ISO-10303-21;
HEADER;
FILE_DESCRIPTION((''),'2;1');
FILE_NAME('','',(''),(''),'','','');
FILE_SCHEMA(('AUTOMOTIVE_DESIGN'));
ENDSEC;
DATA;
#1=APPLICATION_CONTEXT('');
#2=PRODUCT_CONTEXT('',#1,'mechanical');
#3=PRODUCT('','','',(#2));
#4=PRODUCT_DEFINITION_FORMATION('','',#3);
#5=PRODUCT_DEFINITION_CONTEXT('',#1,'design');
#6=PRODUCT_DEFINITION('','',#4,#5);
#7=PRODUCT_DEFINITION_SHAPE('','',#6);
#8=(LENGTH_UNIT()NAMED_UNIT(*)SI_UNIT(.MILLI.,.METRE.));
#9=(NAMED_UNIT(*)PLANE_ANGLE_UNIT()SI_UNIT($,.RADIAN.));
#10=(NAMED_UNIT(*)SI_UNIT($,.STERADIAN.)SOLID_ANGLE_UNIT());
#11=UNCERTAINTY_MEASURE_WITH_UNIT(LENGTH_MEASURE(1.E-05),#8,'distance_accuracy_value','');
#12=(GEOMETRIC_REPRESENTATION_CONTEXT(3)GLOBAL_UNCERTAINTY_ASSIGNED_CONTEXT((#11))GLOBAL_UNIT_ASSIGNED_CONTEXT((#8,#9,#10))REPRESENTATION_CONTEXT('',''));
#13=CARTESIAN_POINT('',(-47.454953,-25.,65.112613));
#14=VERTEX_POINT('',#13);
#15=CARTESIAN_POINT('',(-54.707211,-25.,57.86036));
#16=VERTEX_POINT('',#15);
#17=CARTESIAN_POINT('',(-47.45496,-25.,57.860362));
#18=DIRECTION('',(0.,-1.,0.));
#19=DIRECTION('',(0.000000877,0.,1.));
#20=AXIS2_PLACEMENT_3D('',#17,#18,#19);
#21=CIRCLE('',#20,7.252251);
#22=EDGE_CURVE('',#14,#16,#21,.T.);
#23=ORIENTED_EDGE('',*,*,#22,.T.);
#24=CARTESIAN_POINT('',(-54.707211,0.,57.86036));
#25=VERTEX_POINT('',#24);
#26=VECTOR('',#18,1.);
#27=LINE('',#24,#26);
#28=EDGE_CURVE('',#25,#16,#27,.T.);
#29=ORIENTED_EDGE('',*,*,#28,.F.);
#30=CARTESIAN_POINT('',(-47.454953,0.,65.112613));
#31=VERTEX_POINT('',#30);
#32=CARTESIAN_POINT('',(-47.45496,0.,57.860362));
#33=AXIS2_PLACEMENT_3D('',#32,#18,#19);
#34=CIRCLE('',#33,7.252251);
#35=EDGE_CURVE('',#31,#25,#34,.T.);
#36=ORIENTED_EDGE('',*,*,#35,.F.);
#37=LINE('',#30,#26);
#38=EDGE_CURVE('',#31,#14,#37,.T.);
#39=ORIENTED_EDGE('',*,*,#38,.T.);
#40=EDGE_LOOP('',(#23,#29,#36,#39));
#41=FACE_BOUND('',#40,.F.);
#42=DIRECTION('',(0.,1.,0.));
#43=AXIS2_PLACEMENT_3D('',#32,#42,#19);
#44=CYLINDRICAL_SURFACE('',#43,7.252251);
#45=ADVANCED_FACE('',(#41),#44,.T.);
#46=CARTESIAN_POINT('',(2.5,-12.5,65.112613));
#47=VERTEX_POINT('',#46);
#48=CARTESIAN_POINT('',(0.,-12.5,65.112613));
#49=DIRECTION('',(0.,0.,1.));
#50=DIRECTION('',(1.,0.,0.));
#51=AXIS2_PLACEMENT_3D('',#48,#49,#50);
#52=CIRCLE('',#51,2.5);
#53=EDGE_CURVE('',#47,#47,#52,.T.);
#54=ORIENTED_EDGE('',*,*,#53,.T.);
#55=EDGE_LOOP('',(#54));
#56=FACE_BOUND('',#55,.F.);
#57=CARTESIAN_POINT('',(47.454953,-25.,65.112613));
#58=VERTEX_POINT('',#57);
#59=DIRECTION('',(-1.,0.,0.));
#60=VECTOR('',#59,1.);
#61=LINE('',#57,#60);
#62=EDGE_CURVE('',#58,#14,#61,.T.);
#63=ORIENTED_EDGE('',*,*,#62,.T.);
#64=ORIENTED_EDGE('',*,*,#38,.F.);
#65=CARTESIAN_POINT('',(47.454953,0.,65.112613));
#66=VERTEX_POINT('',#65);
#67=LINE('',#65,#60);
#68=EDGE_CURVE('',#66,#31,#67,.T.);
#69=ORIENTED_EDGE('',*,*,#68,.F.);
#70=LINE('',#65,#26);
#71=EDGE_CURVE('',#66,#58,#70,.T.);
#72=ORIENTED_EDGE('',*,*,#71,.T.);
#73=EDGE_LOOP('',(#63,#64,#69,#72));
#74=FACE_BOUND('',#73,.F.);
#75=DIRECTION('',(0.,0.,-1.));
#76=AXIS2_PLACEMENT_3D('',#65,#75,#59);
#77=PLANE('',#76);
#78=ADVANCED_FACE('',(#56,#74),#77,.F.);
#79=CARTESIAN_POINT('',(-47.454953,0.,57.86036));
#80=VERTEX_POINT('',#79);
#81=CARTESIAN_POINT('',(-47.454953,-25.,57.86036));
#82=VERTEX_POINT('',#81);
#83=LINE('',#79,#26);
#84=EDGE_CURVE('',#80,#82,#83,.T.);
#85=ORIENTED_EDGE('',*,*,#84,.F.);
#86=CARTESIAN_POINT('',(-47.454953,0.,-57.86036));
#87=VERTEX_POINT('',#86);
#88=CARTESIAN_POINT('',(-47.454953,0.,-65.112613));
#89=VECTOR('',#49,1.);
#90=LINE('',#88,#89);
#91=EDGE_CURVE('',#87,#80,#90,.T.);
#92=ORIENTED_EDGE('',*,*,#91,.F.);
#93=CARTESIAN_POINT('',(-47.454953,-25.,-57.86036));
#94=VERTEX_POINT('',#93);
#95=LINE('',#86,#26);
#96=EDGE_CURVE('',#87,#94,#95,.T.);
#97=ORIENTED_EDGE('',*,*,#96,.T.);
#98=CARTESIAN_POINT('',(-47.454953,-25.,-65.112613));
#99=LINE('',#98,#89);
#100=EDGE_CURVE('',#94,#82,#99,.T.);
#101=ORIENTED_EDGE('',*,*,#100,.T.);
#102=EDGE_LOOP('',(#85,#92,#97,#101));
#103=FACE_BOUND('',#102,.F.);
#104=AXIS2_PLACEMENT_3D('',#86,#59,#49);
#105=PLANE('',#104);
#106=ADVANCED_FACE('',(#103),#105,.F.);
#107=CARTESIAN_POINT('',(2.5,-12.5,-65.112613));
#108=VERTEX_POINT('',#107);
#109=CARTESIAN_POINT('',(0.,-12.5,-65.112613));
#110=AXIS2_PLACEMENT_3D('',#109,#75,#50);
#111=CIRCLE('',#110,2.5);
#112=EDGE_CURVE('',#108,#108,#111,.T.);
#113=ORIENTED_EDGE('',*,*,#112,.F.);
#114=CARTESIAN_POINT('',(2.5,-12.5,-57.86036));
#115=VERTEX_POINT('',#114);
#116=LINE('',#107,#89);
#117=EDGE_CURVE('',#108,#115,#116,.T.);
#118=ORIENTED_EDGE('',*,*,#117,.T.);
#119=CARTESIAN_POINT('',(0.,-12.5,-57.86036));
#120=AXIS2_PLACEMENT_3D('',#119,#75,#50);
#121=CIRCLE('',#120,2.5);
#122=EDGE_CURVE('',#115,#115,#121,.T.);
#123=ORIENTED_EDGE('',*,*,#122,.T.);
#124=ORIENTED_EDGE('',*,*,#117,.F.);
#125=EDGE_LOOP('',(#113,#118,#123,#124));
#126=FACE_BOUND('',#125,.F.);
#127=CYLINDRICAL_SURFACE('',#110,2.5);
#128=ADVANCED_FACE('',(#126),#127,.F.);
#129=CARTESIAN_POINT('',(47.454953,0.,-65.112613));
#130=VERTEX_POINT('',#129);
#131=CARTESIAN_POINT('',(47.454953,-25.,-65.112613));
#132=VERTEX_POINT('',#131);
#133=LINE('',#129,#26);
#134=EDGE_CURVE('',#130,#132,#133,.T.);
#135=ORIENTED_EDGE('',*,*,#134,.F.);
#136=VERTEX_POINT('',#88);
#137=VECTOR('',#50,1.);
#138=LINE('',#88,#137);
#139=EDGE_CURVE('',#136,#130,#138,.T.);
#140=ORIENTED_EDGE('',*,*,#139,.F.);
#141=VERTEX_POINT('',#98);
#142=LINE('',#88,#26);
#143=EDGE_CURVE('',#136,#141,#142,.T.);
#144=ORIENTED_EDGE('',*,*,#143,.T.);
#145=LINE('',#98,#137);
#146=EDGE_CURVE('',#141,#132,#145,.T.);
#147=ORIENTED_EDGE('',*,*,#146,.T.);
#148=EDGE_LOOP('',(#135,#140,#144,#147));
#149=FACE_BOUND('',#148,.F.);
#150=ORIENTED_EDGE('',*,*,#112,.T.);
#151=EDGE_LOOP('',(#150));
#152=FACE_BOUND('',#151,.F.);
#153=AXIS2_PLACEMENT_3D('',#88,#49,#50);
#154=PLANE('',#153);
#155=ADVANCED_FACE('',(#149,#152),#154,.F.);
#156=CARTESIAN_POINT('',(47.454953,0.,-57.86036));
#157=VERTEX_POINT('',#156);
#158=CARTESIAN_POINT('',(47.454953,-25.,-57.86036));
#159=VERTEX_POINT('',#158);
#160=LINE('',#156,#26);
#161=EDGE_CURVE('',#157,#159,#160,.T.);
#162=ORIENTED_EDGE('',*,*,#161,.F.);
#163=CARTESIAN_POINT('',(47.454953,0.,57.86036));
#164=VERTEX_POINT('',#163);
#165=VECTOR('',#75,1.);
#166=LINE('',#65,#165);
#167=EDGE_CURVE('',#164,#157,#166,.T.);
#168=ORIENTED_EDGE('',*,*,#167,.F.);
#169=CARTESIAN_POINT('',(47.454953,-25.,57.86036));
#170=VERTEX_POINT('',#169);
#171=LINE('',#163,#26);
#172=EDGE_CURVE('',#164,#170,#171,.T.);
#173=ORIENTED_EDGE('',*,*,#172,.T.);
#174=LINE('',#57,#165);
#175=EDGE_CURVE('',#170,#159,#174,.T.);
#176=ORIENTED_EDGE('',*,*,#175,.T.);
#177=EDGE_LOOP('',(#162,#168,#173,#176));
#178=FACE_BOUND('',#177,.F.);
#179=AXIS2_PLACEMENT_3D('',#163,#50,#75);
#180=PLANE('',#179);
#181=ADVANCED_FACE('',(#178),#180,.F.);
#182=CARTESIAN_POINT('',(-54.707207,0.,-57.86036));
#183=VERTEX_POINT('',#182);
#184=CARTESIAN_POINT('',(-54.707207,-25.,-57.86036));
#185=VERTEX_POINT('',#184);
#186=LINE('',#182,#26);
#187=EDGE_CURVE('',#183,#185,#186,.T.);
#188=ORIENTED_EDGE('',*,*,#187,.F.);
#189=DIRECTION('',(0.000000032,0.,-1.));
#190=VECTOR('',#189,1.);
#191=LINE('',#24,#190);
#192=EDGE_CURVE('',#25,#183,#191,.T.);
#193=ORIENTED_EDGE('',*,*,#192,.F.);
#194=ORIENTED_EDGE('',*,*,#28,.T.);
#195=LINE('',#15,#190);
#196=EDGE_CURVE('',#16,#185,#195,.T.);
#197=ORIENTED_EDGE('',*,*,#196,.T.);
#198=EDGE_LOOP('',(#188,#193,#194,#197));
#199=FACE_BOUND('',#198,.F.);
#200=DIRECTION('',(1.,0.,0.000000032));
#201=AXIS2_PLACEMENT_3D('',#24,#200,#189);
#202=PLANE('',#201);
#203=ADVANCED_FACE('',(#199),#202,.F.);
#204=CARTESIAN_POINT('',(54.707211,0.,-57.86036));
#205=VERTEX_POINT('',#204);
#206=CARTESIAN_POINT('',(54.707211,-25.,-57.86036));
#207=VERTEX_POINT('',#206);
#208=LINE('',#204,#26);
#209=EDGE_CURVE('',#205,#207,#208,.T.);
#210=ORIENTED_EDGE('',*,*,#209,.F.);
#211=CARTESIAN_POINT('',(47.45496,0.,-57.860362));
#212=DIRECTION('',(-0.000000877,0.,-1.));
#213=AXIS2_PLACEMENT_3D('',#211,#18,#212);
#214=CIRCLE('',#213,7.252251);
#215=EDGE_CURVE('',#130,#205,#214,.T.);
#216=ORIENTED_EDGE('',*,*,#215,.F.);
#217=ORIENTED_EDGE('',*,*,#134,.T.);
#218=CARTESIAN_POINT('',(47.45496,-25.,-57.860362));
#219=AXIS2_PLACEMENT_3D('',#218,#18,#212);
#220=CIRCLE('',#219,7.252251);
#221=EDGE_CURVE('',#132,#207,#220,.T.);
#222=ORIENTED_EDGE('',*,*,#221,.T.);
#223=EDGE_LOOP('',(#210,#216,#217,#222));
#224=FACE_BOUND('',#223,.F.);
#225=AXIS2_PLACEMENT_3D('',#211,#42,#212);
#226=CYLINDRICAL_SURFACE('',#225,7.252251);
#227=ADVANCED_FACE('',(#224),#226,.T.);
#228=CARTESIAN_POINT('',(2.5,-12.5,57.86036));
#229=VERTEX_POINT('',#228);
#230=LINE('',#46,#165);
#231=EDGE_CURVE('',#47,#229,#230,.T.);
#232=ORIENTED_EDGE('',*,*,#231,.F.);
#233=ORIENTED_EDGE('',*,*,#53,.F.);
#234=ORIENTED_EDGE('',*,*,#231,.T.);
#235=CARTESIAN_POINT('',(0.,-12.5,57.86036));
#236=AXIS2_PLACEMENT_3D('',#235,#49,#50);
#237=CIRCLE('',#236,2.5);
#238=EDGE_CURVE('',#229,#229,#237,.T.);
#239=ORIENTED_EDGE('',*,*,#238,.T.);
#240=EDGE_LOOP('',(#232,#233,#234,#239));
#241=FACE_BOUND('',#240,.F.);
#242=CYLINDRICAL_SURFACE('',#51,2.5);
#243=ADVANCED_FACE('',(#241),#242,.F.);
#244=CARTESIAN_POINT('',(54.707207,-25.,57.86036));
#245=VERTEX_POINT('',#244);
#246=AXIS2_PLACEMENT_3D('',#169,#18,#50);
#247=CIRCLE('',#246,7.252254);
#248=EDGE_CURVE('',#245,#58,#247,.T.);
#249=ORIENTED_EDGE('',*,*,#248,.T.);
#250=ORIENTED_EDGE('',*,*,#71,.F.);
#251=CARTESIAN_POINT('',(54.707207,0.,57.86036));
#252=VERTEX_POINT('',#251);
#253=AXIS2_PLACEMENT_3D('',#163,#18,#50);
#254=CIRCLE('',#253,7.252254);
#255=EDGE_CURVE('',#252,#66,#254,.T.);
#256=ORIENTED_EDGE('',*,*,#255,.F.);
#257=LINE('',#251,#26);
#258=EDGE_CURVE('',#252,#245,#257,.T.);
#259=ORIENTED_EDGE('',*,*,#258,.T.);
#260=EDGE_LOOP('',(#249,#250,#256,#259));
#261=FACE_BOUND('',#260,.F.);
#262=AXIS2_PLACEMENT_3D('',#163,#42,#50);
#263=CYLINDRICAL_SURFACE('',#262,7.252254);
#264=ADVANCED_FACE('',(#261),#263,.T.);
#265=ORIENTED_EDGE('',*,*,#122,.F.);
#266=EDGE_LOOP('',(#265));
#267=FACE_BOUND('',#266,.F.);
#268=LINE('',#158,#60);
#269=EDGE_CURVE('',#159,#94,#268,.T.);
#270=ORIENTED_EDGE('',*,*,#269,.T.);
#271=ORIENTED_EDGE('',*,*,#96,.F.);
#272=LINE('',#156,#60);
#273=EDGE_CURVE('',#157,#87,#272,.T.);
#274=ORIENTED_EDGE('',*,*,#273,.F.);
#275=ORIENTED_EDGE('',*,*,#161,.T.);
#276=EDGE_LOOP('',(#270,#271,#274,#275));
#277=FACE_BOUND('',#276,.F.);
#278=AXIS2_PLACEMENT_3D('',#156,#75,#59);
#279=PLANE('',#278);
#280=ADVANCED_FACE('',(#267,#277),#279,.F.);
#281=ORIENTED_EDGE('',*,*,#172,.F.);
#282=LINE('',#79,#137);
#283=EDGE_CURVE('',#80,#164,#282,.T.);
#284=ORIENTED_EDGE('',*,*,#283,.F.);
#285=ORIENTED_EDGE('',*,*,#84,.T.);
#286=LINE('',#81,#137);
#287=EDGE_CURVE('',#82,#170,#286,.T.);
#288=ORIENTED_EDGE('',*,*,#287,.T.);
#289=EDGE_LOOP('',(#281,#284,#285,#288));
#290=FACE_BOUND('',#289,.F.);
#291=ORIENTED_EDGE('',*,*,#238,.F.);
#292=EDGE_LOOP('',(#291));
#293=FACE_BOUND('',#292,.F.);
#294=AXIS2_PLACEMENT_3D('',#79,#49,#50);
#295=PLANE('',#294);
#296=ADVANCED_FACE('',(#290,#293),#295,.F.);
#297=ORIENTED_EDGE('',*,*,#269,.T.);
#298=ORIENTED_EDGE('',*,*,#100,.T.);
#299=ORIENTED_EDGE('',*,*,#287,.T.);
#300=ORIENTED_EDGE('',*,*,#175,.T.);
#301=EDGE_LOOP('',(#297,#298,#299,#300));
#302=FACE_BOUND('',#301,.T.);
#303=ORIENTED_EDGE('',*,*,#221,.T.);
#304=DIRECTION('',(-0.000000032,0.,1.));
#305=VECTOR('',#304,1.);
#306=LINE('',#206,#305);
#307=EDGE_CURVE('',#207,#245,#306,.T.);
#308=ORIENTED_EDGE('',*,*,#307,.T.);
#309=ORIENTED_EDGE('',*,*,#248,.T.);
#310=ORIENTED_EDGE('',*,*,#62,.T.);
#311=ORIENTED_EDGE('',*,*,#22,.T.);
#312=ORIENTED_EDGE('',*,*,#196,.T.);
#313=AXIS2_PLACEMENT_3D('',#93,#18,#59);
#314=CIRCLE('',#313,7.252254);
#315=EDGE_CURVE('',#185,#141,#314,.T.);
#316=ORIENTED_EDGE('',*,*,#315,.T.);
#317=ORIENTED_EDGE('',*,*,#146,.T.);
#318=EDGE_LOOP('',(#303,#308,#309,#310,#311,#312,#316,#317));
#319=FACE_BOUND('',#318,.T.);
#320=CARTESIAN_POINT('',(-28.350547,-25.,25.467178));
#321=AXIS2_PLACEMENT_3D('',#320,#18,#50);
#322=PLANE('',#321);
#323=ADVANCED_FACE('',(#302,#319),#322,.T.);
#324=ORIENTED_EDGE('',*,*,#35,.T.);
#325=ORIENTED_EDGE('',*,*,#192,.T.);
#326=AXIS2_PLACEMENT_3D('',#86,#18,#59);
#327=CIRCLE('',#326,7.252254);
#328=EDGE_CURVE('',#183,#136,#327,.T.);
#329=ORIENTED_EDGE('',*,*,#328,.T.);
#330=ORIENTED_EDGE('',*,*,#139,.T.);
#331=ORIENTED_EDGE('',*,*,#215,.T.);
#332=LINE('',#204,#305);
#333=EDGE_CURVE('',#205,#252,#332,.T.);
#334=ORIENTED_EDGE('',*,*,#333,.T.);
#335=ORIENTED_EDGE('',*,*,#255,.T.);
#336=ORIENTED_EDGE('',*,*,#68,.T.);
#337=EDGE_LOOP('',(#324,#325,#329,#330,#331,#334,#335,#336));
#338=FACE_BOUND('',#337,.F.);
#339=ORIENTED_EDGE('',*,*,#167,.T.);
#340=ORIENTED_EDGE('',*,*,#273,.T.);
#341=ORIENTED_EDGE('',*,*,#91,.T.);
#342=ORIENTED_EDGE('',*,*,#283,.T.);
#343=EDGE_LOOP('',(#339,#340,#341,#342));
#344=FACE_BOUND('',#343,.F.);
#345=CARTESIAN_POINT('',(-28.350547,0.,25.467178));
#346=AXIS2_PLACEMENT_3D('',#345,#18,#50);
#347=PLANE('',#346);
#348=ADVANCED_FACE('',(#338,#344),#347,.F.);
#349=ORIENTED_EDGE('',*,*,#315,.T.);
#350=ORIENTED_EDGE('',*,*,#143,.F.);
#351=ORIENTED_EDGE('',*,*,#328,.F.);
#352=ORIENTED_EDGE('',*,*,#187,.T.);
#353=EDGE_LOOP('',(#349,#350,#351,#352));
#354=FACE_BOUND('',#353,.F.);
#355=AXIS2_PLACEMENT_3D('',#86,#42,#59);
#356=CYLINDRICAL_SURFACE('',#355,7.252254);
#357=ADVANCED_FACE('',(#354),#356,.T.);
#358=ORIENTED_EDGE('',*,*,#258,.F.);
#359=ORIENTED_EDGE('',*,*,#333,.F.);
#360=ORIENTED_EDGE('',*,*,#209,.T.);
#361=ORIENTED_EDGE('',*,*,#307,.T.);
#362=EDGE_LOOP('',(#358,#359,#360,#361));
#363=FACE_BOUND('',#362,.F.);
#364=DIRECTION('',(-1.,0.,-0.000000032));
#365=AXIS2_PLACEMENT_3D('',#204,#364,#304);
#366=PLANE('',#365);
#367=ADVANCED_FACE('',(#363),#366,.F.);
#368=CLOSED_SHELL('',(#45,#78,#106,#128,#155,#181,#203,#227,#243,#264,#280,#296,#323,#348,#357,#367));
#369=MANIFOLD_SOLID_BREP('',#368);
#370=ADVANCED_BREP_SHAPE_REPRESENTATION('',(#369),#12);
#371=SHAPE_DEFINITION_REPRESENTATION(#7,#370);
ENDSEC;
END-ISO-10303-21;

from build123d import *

# Parameters (mm, degrees)
F1_DEPTH = 25
F3_R     = 2.5
F4_DEPTH = 25
F2_R     = 2.5
F5_DEPTH = 25


# Not quite as in the source:
# - ends of sketch curves that miss each other by under 0.0002 mm in the source are joined


with BuildPart() as f1:
    # F0 (on Front) → F1 (new body)
    with BuildSketch(Plane.XZ):
        with BuildLine():
            Line((-47.4549531937, 57.8603595495), (47.4549531937, 57.8603595495))
            Line((47.4549531937, 57.8603595495), (47.4549531937, 65.1126131415))
            Line((47.4549531937, 65.1126131415), (-47.4549531937, 65.1126131415))
            ThreePointArc((-47.4549531937, 65.1126131415), (-52.5830735216, 62.9884798775), (-54.707210511, 57.8603595495))
            Line((-54.707210511, 57.8603595495), (-54.7072067857, -57.8603595495))
            ThreePointArc((-54.7072067857, -57.8603595495), (-52.5830708875, -62.9884772433), (-47.4549531937, -65.1126131415))
            Line((-47.4549531937, -65.1126131415), (-47.4549531937, -57.8603595495))
            Line((-47.4549531937, -57.8603595495), (-47.4549531937, 57.8603595495))
        make_face()
        with BuildLine():
            Line((47.4549531937, 65.1126131415), (47.4549531937, 57.8603595495))
            Line((47.4549531937, 57.8603595495), (47.4549531937, -57.8603595495))
            Line((47.4549531937, -57.8603595495), (-47.4549531937, -57.8603595495))
            Line((-47.4549531937, -57.8603595495), (-47.4549531937, -65.1126131415))
            Line((-47.4549531937, -65.1126131415), (47.4549531937, -65.1126131415))
            ThreePointArc((47.4549531937, -65.1126131415), (52.5830735216, -62.9884798775), (54.707210511, -57.8603595495))
            Line((54.707210511, -57.8603595495), (54.7072067857, 57.8603595495))
            ThreePointArc((54.7072067857, 57.8603595495), (52.5830708875, 62.9884772433), (47.4549531937, 65.1126131415))
        make_face()
    extrude(amount=F1_DEPTH)

    # F3 (on face) → F4 (cut)
    with BuildSketch(Plane(origin=(0, 0, -65.1126131415), x_dir=(1, 0, 0), z_dir=(0, 0, -1))):
        with Locations((0, 12.5)):
            Circle(F3_R)
    extrude(amount=-F4_DEPTH, mode=Mode.SUBTRACT)

    # F2 (on face) → F5 (cut)
    with BuildSketch(Plane.XY.offset(65.1126131415)):
        with Locations((0, -12.5)):
            Circle(F2_R)
    extrude(amount=-F5_DEPTH, mode=Mode.SUBTRACT)


solid = f1.part
